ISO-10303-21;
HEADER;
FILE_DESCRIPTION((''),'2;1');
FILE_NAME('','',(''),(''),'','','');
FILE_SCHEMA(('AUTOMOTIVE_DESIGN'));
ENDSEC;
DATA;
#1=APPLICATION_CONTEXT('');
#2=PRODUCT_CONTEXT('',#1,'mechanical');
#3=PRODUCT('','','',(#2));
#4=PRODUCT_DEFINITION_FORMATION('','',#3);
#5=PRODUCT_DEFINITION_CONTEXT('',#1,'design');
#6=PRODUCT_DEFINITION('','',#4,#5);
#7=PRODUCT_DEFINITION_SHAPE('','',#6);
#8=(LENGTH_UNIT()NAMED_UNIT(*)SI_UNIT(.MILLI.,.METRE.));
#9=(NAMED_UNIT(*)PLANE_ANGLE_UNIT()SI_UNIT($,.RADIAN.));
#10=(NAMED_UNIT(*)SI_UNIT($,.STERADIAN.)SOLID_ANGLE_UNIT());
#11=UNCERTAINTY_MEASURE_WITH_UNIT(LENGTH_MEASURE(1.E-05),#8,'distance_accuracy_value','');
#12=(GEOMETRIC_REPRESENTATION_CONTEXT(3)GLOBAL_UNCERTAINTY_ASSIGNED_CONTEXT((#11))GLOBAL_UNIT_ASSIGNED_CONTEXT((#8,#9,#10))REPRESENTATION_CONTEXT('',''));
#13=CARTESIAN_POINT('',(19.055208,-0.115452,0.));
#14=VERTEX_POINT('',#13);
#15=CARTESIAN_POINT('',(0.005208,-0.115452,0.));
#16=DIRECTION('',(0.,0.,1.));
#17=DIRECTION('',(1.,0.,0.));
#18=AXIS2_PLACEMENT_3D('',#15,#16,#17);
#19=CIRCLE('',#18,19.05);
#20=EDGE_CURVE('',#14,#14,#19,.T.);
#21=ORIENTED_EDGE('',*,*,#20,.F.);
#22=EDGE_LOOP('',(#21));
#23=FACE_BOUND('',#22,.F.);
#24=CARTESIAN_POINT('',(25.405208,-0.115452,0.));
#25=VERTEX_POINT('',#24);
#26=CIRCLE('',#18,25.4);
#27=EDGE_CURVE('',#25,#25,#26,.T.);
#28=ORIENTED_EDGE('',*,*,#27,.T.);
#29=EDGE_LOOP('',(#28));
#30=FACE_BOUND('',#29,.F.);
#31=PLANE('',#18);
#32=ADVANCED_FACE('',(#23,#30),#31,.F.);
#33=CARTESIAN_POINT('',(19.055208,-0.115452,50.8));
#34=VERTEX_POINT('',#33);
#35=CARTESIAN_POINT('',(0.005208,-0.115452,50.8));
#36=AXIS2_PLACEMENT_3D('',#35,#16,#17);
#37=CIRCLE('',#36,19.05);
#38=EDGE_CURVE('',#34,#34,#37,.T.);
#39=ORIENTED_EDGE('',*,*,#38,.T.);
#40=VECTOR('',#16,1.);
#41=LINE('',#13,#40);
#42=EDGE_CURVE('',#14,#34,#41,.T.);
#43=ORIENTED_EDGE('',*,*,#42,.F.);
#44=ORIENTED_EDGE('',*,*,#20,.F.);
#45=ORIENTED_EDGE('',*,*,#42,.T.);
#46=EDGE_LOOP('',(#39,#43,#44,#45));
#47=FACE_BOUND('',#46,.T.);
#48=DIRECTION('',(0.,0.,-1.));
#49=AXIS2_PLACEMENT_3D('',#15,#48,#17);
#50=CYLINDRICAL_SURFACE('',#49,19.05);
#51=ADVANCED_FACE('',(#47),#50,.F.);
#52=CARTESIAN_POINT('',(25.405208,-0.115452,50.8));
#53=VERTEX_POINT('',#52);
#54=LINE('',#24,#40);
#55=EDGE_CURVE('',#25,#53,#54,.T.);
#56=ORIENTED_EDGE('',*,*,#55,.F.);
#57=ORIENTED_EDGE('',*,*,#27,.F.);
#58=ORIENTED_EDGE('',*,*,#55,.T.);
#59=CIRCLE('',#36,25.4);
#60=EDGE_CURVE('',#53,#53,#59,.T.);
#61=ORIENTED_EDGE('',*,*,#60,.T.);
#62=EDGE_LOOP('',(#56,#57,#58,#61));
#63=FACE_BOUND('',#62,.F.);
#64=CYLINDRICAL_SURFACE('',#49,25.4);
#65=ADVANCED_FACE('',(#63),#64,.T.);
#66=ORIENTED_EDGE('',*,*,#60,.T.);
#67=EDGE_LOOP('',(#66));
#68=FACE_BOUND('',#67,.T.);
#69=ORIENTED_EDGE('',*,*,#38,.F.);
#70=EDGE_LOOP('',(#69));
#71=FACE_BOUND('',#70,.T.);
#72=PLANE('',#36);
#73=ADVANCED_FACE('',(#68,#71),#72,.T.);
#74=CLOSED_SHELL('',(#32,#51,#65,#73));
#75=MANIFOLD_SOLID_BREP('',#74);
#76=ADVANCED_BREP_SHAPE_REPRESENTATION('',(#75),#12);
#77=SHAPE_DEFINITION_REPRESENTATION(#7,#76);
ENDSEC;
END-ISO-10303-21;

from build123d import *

# Parameters (mm, degrees)
F0_R     = 25.4
F0_R_2   = 19.05
F2_DEPTH = 50.8


# Not quite as in the source:
# - the program builds the solid bodies; features that only make, move or delete a surface that nothing else refers to are left out


with BuildPart() as f2:
    # F0 (on Top) → F2 (new body)
    with BuildSketch(Plane.XY):
        with Locations((0.0052079558, -0.1154523343)):
            Circle(F0_R)
        with Locations((0.0052079558, -0.1154523343)):
            Circle(F0_R_2, mode=Mode.SUBTRACT)
    extrude(amount=F2_DEPTH)


solid = f2.part
